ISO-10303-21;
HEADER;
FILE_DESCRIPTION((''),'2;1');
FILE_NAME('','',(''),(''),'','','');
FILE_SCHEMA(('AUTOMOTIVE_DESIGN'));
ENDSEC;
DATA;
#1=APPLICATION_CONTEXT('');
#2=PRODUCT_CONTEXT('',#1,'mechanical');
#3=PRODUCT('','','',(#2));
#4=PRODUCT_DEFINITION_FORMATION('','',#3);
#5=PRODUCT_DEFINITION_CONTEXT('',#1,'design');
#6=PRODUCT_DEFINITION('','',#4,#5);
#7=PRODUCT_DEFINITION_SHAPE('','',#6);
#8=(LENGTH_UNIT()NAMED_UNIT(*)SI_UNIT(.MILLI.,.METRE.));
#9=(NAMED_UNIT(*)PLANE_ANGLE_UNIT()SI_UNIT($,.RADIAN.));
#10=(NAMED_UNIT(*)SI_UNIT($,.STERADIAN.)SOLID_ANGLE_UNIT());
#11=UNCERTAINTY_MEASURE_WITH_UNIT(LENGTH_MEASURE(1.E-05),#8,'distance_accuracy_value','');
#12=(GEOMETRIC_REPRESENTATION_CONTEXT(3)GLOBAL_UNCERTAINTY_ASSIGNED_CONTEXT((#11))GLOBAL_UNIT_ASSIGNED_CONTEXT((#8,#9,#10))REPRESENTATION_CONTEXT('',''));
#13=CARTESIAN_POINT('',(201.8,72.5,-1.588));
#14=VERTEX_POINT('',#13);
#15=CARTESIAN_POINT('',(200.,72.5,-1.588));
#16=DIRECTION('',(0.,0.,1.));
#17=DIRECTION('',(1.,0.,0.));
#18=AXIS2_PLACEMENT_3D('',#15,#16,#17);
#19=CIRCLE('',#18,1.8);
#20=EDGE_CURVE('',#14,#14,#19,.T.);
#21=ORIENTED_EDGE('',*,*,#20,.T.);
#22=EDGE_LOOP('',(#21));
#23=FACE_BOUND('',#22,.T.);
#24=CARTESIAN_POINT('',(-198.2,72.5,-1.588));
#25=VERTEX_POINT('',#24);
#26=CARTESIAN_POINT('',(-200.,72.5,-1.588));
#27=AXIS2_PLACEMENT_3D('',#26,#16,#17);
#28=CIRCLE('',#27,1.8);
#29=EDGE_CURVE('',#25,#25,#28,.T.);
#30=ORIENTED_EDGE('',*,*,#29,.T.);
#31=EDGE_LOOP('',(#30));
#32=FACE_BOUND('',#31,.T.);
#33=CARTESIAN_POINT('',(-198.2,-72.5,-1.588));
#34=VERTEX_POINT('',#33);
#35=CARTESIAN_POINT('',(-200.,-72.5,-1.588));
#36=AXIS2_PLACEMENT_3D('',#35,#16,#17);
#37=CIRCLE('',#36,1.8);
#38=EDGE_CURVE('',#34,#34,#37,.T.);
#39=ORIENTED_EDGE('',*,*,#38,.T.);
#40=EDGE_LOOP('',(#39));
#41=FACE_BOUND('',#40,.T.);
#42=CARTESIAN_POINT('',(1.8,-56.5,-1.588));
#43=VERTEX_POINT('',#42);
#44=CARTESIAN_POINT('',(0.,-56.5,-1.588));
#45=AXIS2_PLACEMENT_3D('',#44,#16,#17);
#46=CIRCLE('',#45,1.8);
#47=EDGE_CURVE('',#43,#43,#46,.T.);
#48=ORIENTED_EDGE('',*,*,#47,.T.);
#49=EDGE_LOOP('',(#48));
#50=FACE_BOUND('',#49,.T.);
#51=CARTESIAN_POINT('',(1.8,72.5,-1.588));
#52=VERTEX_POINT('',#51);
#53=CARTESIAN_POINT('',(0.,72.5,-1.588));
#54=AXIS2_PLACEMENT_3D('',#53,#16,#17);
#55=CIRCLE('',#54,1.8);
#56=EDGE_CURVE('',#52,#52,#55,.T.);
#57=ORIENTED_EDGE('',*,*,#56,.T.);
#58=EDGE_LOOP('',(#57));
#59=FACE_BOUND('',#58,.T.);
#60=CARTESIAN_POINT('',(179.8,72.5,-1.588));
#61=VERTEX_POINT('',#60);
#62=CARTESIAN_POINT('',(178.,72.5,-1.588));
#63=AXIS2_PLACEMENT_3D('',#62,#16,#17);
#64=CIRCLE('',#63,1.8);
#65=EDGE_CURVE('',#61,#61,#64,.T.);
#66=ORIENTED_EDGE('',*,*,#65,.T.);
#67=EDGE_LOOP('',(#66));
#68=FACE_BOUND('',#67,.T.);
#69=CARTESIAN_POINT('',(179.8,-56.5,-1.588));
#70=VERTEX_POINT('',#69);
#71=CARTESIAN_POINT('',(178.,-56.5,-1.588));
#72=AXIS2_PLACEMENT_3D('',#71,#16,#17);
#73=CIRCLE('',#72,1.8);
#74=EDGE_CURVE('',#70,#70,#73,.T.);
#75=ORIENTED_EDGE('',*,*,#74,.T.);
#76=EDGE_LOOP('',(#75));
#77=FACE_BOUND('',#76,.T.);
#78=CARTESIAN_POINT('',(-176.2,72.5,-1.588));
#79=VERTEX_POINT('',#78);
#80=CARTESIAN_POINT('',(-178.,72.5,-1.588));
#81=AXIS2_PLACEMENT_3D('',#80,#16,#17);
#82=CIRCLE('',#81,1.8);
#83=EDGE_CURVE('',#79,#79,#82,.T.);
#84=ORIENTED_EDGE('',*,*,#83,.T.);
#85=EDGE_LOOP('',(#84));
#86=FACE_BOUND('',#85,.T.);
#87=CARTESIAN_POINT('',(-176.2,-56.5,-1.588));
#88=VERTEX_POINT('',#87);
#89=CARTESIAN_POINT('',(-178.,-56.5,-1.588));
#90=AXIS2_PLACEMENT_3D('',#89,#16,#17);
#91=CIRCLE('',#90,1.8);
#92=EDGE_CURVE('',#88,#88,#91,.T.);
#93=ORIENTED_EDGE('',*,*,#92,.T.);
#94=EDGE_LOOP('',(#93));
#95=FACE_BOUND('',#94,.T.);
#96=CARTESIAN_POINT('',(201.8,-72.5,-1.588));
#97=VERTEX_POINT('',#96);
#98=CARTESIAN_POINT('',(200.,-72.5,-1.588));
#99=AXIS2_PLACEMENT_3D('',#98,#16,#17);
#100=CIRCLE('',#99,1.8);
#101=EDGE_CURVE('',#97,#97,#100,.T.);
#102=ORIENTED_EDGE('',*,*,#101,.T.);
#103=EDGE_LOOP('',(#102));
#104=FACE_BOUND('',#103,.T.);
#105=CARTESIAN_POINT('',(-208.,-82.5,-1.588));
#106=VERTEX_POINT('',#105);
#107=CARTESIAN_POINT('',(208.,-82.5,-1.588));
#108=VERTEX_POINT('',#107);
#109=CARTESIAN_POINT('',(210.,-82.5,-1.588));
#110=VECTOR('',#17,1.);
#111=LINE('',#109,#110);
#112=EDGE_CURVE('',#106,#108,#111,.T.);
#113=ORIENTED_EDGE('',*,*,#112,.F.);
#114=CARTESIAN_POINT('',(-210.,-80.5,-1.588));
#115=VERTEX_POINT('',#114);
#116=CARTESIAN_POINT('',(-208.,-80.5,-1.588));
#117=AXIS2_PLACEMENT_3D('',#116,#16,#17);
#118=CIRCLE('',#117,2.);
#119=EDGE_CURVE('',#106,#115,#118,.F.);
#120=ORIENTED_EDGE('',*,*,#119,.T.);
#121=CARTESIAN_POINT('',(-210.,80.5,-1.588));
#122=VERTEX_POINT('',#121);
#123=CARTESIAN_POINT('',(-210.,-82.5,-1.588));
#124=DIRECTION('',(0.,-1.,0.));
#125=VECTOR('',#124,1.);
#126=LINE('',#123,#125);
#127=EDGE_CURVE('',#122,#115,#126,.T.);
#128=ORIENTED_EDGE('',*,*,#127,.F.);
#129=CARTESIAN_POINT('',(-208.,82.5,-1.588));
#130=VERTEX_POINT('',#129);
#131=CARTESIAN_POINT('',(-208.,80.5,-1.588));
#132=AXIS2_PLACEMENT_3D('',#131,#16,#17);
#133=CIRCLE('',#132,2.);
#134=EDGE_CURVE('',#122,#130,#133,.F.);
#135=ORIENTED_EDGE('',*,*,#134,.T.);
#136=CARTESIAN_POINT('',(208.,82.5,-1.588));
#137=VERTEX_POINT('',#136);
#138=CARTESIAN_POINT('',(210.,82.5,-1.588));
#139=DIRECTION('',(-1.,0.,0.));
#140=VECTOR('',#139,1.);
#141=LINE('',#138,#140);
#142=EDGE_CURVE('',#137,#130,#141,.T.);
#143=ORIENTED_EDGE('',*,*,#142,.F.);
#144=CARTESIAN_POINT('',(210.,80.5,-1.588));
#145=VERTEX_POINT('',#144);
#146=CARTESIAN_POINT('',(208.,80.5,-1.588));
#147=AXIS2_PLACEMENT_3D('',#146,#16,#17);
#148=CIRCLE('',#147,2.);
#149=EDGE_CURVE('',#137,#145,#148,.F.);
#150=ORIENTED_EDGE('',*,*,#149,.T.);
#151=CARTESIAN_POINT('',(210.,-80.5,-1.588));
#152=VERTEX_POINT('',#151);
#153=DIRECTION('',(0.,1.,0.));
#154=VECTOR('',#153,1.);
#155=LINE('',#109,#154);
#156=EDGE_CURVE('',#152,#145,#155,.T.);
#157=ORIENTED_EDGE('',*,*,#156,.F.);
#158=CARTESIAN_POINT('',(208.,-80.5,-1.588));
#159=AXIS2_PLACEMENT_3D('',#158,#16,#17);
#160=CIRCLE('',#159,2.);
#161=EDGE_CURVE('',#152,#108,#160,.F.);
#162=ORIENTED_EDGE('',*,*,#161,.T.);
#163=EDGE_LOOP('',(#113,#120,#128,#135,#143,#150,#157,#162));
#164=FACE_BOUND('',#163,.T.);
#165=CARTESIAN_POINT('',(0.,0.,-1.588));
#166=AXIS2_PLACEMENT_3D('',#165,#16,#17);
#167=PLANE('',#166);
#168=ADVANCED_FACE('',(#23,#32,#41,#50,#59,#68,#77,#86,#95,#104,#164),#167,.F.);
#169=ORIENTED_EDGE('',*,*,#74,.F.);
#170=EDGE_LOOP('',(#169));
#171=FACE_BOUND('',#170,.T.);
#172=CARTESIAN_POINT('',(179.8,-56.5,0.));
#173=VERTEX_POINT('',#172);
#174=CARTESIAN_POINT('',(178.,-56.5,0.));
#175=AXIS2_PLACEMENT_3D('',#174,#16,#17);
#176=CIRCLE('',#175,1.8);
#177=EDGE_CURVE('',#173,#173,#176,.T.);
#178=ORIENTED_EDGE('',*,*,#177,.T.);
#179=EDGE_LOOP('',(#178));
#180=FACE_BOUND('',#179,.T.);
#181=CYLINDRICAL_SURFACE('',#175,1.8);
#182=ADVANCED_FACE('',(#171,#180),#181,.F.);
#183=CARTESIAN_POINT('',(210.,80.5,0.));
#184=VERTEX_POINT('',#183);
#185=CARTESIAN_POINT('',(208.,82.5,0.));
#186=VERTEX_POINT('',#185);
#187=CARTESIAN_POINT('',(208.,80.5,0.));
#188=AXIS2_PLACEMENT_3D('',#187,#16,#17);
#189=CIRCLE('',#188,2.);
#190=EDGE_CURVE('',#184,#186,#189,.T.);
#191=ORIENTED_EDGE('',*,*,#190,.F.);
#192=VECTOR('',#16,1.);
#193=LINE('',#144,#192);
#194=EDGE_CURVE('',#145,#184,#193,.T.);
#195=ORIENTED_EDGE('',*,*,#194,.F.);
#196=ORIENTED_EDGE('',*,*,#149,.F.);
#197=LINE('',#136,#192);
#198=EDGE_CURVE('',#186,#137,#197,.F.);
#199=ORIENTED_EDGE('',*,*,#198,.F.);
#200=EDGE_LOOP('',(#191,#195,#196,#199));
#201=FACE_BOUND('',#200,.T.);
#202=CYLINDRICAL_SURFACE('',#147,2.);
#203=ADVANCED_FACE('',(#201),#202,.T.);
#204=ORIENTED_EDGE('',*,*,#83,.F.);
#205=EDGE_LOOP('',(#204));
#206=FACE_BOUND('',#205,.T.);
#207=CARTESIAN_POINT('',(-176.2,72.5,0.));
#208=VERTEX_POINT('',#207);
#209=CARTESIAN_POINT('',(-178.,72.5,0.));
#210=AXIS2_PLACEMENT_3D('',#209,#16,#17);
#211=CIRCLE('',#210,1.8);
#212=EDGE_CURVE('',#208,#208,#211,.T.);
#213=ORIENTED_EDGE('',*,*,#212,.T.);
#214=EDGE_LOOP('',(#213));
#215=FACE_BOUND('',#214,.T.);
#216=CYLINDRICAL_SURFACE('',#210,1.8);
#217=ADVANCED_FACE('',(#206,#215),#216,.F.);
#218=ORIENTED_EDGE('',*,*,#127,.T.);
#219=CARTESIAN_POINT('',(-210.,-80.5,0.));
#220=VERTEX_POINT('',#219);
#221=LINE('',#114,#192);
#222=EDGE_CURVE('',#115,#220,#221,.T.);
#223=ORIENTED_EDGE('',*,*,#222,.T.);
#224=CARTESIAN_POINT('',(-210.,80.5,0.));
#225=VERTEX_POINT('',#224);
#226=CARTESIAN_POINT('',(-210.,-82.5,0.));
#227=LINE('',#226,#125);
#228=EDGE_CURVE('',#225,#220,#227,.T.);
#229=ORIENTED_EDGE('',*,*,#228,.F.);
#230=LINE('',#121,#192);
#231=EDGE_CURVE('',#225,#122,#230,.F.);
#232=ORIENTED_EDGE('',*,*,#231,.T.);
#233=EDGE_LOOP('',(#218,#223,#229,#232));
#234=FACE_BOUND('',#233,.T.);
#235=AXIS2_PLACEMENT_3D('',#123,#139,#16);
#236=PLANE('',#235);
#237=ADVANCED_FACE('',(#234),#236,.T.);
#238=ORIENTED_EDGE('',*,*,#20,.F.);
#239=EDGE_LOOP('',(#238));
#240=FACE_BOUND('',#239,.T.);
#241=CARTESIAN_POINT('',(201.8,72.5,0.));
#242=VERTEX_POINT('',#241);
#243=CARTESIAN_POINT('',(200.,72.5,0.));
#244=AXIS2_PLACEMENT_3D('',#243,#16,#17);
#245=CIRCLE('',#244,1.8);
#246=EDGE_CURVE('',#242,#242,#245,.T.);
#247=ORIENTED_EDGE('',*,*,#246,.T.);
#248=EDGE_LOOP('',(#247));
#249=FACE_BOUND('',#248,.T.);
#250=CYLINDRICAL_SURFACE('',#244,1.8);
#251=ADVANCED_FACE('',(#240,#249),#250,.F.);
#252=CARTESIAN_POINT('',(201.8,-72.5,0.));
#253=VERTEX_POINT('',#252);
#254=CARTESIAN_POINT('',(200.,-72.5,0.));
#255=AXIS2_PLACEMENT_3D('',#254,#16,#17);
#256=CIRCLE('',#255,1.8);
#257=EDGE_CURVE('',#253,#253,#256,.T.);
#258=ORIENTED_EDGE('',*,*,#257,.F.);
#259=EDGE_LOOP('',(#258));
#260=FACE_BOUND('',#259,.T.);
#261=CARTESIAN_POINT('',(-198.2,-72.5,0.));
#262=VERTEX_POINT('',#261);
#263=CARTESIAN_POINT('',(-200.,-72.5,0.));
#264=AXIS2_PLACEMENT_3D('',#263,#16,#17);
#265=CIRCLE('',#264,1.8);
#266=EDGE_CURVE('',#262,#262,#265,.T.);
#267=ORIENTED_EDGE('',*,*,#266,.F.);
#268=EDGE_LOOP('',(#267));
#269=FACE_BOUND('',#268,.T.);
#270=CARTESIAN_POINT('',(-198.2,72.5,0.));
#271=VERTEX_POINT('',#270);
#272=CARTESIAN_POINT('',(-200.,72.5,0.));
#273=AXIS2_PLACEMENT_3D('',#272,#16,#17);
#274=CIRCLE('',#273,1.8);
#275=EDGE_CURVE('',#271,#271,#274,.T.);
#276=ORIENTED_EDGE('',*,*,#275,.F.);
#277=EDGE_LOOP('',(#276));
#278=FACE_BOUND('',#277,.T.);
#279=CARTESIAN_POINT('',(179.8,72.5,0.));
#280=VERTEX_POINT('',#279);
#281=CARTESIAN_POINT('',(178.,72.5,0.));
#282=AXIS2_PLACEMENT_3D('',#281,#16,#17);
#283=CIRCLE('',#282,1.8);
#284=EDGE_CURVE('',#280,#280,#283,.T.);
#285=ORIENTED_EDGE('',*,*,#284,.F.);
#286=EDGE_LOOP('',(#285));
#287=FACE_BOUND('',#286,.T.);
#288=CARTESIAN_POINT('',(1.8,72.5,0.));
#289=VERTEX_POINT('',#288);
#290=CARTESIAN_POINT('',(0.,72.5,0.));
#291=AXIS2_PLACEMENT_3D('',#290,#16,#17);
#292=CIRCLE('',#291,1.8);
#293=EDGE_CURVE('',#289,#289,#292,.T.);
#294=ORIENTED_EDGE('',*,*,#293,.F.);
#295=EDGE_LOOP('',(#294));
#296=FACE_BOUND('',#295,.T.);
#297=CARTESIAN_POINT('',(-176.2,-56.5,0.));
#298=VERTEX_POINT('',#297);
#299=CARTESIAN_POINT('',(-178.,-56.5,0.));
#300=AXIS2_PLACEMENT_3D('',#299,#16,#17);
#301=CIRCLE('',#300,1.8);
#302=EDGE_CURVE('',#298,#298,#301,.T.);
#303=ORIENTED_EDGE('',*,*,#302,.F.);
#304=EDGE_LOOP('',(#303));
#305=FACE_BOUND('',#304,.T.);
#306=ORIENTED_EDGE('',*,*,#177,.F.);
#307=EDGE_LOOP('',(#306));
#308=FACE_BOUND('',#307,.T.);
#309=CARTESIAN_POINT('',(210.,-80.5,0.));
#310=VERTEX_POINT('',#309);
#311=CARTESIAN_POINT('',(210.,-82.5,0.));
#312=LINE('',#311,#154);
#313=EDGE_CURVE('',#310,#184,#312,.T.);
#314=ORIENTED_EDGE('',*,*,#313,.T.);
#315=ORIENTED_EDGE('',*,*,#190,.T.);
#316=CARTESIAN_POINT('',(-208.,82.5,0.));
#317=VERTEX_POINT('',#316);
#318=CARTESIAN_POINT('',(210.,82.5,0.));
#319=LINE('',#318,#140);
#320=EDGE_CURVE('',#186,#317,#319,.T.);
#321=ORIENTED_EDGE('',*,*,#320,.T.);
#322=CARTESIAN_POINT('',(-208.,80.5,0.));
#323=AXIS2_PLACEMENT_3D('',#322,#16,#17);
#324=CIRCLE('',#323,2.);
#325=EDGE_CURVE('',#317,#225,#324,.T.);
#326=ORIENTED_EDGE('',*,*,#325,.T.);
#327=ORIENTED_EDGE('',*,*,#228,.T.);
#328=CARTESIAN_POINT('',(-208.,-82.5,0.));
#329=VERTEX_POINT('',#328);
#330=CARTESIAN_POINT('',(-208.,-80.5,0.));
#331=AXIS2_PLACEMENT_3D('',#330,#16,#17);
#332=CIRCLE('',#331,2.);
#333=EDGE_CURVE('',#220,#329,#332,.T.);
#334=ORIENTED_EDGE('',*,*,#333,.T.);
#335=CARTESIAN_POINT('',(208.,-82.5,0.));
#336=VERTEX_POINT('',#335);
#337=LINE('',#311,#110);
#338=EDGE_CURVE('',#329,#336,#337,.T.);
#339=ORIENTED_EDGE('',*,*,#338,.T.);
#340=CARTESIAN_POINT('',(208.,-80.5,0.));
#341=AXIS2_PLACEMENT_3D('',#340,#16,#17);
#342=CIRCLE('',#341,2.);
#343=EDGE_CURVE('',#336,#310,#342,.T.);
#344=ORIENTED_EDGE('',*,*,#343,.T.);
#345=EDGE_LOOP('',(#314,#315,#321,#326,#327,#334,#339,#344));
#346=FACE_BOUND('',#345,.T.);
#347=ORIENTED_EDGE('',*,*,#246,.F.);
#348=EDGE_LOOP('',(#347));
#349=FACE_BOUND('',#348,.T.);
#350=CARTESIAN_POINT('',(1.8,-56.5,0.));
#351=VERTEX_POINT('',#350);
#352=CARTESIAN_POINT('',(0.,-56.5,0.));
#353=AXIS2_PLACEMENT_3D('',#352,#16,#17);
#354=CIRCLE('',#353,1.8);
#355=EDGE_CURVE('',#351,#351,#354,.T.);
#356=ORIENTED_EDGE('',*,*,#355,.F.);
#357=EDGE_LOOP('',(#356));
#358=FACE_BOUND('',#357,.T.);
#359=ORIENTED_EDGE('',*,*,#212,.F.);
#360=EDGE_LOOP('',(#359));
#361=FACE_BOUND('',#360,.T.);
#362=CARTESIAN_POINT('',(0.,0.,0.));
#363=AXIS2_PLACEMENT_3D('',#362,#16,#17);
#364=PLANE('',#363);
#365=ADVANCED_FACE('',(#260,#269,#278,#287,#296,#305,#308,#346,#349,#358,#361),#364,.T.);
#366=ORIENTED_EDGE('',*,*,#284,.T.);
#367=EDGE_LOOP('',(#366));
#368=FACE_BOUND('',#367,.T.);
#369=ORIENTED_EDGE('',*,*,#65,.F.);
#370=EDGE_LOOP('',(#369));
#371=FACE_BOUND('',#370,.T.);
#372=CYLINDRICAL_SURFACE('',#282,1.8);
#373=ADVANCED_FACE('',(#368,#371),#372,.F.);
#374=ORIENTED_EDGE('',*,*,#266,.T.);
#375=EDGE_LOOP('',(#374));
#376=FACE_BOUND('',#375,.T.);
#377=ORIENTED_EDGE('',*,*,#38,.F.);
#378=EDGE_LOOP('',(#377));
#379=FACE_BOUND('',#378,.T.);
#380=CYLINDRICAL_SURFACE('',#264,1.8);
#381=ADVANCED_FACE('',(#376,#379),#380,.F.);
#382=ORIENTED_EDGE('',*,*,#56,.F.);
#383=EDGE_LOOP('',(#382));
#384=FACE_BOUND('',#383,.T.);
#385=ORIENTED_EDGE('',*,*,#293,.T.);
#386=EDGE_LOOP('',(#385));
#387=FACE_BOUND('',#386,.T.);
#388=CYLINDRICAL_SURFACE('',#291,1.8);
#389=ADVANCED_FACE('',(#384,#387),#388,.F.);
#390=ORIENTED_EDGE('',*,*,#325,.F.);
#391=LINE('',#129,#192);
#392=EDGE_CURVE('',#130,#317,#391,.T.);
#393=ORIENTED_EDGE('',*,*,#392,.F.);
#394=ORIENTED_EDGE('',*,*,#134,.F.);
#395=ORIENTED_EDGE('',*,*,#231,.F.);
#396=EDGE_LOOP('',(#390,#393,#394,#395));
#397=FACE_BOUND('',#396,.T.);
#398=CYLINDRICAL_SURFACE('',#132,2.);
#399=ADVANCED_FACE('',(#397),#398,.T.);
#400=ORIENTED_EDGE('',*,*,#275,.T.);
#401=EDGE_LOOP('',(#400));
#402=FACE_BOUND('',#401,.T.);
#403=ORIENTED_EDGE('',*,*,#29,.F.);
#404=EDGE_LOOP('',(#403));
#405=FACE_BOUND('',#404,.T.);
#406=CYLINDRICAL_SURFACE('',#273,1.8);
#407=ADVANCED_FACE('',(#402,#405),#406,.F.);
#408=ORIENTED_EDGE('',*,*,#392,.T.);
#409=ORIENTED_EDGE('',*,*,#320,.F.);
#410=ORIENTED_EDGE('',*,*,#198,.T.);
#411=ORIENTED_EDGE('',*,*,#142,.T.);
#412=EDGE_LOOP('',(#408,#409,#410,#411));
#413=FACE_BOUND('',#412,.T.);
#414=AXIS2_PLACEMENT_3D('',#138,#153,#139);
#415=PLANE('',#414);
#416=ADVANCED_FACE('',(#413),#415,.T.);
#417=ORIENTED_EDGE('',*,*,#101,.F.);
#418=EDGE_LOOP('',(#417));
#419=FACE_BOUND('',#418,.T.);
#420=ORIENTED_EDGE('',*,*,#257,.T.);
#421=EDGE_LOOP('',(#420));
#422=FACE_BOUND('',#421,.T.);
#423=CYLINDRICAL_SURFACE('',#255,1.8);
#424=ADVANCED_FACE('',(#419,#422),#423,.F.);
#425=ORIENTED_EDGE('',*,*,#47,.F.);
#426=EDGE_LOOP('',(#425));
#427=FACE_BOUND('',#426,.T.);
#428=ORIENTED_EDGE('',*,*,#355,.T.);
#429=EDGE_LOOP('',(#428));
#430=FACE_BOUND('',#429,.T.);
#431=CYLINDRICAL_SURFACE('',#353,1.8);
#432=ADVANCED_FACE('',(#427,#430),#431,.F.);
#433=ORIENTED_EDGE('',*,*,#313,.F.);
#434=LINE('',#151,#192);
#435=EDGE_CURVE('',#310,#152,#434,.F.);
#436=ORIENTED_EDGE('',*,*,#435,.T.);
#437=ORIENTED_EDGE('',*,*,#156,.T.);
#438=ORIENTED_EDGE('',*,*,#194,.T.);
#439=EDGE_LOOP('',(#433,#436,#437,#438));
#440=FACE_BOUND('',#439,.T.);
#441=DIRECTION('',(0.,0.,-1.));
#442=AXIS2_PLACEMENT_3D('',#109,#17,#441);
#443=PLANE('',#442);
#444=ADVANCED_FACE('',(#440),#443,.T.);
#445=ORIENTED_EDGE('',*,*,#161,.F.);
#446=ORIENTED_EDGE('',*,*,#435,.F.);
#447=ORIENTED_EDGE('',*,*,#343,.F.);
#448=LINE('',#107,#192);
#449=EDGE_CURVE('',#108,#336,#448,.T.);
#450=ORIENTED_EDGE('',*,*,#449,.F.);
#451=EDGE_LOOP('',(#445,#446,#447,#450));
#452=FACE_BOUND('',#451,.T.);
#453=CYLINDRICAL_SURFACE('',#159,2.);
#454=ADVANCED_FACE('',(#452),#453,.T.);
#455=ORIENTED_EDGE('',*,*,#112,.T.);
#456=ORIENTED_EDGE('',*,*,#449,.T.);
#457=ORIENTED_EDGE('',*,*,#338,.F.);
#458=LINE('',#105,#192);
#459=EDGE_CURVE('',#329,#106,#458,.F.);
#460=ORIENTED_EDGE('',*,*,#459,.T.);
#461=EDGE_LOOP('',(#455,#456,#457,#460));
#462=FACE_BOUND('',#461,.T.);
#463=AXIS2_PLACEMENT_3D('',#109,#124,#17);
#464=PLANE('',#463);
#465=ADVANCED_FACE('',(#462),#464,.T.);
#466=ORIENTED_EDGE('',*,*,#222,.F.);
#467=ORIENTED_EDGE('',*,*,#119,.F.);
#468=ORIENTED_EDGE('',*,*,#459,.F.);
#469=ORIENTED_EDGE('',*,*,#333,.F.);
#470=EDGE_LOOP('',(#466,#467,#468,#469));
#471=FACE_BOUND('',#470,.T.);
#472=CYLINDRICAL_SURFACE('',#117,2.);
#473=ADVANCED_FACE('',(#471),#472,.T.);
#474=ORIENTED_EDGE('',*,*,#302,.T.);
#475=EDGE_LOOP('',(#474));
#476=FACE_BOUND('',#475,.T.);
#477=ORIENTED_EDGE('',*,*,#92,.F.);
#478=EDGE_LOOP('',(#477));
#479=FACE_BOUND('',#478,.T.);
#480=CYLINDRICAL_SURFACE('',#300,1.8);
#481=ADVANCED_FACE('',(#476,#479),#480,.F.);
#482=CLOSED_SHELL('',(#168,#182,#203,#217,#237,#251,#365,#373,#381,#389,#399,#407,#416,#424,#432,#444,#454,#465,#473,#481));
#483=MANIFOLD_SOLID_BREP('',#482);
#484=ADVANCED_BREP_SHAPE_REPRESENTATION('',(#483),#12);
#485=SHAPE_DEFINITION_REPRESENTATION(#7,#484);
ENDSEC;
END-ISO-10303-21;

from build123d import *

# Parameters (mm, degrees)
SKETCH1_W            = 420
SKETCH1_H            = 165
BASE_FLANGE1_DEPTH   = 1.588
BREAK_CORNER1_START  = -1.588
BREAK_CORNER1_DEPTH  = 1.588
M3_CLEARANCE_HOLE1_D = 3.6


# Read off the part's stored shape, not the designer's step: Break-Corner1
# Sheet-metal steps are written as plain solids
with BuildPart() as part:
    # Sketch1 → Base-Flange1 (new body)
    with BuildSketch(Plane.XY):
        Rectangle(SKETCH1_W, SKETCH1_H)
    extrude(amount=-BASE_FLANGE1_DEPTH)

    # Break-Corner1 outline → Break-Corner1 (cut)
    with BuildSketch(Plane.XY.offset(BREAK_CORNER1_START)):
        with BuildLine():
            ThreePointArc((208, 82.5), (209.414213562, 81.914213562), (210, 80.5))
            Line((210, 80.5), (210, 82.5))
            Line((210, 82.5), (208, 82.5))
        make_face()
        with BuildLine():
            Line((210, -82.5), (210, -80.5))
            ThreePointArc((210, -80.5), (209.414213562, -81.914213562), (208, -82.5))
            Line((208, -82.5), (210, -82.5))
        make_face()
        with BuildLine():
            ThreePointArc((-210, 80.5), (-209.414213562, 81.914213562), (-208, 82.5))
            Line((-208, 82.5), (-210, 82.5))
            Line((-210, 82.5), (-210, 80.5))
        make_face()
        with BuildLine():
            Line((-210, -82.5), (-208, -82.5))
            ThreePointArc((-208, -82.5), (-209.414213562, -81.914213562), (-210, -80.5))
            Line((-210, -80.5), (-210, -82.5))
        make_face()
    extrude(amount=BREAK_CORNER1_DEPTH, mode=Mode.SUBTRACT)

    # M3 Clearance Hole1 (through all)
    with Locations(Plane.XY):
        with Locations((-200, 72.5), (-178, 72.5), (0, 72.5), (0, -56.5), (-178, -56.5), (-200, -72.5)):
            m3_clearance_hole1 = Hole(M3_CLEARANCE_HOLE1_D / 2)

    # Mirror3: M3 Clearance Hole1 across plane
    add(m3_clearance_hole1.mirror(Plane(origin=(0, 0, 0), x_dir=(0, 0, 1), z_dir=(1, 0, 0))), mode=Mode.SUBTRACT)


solid = part.part
